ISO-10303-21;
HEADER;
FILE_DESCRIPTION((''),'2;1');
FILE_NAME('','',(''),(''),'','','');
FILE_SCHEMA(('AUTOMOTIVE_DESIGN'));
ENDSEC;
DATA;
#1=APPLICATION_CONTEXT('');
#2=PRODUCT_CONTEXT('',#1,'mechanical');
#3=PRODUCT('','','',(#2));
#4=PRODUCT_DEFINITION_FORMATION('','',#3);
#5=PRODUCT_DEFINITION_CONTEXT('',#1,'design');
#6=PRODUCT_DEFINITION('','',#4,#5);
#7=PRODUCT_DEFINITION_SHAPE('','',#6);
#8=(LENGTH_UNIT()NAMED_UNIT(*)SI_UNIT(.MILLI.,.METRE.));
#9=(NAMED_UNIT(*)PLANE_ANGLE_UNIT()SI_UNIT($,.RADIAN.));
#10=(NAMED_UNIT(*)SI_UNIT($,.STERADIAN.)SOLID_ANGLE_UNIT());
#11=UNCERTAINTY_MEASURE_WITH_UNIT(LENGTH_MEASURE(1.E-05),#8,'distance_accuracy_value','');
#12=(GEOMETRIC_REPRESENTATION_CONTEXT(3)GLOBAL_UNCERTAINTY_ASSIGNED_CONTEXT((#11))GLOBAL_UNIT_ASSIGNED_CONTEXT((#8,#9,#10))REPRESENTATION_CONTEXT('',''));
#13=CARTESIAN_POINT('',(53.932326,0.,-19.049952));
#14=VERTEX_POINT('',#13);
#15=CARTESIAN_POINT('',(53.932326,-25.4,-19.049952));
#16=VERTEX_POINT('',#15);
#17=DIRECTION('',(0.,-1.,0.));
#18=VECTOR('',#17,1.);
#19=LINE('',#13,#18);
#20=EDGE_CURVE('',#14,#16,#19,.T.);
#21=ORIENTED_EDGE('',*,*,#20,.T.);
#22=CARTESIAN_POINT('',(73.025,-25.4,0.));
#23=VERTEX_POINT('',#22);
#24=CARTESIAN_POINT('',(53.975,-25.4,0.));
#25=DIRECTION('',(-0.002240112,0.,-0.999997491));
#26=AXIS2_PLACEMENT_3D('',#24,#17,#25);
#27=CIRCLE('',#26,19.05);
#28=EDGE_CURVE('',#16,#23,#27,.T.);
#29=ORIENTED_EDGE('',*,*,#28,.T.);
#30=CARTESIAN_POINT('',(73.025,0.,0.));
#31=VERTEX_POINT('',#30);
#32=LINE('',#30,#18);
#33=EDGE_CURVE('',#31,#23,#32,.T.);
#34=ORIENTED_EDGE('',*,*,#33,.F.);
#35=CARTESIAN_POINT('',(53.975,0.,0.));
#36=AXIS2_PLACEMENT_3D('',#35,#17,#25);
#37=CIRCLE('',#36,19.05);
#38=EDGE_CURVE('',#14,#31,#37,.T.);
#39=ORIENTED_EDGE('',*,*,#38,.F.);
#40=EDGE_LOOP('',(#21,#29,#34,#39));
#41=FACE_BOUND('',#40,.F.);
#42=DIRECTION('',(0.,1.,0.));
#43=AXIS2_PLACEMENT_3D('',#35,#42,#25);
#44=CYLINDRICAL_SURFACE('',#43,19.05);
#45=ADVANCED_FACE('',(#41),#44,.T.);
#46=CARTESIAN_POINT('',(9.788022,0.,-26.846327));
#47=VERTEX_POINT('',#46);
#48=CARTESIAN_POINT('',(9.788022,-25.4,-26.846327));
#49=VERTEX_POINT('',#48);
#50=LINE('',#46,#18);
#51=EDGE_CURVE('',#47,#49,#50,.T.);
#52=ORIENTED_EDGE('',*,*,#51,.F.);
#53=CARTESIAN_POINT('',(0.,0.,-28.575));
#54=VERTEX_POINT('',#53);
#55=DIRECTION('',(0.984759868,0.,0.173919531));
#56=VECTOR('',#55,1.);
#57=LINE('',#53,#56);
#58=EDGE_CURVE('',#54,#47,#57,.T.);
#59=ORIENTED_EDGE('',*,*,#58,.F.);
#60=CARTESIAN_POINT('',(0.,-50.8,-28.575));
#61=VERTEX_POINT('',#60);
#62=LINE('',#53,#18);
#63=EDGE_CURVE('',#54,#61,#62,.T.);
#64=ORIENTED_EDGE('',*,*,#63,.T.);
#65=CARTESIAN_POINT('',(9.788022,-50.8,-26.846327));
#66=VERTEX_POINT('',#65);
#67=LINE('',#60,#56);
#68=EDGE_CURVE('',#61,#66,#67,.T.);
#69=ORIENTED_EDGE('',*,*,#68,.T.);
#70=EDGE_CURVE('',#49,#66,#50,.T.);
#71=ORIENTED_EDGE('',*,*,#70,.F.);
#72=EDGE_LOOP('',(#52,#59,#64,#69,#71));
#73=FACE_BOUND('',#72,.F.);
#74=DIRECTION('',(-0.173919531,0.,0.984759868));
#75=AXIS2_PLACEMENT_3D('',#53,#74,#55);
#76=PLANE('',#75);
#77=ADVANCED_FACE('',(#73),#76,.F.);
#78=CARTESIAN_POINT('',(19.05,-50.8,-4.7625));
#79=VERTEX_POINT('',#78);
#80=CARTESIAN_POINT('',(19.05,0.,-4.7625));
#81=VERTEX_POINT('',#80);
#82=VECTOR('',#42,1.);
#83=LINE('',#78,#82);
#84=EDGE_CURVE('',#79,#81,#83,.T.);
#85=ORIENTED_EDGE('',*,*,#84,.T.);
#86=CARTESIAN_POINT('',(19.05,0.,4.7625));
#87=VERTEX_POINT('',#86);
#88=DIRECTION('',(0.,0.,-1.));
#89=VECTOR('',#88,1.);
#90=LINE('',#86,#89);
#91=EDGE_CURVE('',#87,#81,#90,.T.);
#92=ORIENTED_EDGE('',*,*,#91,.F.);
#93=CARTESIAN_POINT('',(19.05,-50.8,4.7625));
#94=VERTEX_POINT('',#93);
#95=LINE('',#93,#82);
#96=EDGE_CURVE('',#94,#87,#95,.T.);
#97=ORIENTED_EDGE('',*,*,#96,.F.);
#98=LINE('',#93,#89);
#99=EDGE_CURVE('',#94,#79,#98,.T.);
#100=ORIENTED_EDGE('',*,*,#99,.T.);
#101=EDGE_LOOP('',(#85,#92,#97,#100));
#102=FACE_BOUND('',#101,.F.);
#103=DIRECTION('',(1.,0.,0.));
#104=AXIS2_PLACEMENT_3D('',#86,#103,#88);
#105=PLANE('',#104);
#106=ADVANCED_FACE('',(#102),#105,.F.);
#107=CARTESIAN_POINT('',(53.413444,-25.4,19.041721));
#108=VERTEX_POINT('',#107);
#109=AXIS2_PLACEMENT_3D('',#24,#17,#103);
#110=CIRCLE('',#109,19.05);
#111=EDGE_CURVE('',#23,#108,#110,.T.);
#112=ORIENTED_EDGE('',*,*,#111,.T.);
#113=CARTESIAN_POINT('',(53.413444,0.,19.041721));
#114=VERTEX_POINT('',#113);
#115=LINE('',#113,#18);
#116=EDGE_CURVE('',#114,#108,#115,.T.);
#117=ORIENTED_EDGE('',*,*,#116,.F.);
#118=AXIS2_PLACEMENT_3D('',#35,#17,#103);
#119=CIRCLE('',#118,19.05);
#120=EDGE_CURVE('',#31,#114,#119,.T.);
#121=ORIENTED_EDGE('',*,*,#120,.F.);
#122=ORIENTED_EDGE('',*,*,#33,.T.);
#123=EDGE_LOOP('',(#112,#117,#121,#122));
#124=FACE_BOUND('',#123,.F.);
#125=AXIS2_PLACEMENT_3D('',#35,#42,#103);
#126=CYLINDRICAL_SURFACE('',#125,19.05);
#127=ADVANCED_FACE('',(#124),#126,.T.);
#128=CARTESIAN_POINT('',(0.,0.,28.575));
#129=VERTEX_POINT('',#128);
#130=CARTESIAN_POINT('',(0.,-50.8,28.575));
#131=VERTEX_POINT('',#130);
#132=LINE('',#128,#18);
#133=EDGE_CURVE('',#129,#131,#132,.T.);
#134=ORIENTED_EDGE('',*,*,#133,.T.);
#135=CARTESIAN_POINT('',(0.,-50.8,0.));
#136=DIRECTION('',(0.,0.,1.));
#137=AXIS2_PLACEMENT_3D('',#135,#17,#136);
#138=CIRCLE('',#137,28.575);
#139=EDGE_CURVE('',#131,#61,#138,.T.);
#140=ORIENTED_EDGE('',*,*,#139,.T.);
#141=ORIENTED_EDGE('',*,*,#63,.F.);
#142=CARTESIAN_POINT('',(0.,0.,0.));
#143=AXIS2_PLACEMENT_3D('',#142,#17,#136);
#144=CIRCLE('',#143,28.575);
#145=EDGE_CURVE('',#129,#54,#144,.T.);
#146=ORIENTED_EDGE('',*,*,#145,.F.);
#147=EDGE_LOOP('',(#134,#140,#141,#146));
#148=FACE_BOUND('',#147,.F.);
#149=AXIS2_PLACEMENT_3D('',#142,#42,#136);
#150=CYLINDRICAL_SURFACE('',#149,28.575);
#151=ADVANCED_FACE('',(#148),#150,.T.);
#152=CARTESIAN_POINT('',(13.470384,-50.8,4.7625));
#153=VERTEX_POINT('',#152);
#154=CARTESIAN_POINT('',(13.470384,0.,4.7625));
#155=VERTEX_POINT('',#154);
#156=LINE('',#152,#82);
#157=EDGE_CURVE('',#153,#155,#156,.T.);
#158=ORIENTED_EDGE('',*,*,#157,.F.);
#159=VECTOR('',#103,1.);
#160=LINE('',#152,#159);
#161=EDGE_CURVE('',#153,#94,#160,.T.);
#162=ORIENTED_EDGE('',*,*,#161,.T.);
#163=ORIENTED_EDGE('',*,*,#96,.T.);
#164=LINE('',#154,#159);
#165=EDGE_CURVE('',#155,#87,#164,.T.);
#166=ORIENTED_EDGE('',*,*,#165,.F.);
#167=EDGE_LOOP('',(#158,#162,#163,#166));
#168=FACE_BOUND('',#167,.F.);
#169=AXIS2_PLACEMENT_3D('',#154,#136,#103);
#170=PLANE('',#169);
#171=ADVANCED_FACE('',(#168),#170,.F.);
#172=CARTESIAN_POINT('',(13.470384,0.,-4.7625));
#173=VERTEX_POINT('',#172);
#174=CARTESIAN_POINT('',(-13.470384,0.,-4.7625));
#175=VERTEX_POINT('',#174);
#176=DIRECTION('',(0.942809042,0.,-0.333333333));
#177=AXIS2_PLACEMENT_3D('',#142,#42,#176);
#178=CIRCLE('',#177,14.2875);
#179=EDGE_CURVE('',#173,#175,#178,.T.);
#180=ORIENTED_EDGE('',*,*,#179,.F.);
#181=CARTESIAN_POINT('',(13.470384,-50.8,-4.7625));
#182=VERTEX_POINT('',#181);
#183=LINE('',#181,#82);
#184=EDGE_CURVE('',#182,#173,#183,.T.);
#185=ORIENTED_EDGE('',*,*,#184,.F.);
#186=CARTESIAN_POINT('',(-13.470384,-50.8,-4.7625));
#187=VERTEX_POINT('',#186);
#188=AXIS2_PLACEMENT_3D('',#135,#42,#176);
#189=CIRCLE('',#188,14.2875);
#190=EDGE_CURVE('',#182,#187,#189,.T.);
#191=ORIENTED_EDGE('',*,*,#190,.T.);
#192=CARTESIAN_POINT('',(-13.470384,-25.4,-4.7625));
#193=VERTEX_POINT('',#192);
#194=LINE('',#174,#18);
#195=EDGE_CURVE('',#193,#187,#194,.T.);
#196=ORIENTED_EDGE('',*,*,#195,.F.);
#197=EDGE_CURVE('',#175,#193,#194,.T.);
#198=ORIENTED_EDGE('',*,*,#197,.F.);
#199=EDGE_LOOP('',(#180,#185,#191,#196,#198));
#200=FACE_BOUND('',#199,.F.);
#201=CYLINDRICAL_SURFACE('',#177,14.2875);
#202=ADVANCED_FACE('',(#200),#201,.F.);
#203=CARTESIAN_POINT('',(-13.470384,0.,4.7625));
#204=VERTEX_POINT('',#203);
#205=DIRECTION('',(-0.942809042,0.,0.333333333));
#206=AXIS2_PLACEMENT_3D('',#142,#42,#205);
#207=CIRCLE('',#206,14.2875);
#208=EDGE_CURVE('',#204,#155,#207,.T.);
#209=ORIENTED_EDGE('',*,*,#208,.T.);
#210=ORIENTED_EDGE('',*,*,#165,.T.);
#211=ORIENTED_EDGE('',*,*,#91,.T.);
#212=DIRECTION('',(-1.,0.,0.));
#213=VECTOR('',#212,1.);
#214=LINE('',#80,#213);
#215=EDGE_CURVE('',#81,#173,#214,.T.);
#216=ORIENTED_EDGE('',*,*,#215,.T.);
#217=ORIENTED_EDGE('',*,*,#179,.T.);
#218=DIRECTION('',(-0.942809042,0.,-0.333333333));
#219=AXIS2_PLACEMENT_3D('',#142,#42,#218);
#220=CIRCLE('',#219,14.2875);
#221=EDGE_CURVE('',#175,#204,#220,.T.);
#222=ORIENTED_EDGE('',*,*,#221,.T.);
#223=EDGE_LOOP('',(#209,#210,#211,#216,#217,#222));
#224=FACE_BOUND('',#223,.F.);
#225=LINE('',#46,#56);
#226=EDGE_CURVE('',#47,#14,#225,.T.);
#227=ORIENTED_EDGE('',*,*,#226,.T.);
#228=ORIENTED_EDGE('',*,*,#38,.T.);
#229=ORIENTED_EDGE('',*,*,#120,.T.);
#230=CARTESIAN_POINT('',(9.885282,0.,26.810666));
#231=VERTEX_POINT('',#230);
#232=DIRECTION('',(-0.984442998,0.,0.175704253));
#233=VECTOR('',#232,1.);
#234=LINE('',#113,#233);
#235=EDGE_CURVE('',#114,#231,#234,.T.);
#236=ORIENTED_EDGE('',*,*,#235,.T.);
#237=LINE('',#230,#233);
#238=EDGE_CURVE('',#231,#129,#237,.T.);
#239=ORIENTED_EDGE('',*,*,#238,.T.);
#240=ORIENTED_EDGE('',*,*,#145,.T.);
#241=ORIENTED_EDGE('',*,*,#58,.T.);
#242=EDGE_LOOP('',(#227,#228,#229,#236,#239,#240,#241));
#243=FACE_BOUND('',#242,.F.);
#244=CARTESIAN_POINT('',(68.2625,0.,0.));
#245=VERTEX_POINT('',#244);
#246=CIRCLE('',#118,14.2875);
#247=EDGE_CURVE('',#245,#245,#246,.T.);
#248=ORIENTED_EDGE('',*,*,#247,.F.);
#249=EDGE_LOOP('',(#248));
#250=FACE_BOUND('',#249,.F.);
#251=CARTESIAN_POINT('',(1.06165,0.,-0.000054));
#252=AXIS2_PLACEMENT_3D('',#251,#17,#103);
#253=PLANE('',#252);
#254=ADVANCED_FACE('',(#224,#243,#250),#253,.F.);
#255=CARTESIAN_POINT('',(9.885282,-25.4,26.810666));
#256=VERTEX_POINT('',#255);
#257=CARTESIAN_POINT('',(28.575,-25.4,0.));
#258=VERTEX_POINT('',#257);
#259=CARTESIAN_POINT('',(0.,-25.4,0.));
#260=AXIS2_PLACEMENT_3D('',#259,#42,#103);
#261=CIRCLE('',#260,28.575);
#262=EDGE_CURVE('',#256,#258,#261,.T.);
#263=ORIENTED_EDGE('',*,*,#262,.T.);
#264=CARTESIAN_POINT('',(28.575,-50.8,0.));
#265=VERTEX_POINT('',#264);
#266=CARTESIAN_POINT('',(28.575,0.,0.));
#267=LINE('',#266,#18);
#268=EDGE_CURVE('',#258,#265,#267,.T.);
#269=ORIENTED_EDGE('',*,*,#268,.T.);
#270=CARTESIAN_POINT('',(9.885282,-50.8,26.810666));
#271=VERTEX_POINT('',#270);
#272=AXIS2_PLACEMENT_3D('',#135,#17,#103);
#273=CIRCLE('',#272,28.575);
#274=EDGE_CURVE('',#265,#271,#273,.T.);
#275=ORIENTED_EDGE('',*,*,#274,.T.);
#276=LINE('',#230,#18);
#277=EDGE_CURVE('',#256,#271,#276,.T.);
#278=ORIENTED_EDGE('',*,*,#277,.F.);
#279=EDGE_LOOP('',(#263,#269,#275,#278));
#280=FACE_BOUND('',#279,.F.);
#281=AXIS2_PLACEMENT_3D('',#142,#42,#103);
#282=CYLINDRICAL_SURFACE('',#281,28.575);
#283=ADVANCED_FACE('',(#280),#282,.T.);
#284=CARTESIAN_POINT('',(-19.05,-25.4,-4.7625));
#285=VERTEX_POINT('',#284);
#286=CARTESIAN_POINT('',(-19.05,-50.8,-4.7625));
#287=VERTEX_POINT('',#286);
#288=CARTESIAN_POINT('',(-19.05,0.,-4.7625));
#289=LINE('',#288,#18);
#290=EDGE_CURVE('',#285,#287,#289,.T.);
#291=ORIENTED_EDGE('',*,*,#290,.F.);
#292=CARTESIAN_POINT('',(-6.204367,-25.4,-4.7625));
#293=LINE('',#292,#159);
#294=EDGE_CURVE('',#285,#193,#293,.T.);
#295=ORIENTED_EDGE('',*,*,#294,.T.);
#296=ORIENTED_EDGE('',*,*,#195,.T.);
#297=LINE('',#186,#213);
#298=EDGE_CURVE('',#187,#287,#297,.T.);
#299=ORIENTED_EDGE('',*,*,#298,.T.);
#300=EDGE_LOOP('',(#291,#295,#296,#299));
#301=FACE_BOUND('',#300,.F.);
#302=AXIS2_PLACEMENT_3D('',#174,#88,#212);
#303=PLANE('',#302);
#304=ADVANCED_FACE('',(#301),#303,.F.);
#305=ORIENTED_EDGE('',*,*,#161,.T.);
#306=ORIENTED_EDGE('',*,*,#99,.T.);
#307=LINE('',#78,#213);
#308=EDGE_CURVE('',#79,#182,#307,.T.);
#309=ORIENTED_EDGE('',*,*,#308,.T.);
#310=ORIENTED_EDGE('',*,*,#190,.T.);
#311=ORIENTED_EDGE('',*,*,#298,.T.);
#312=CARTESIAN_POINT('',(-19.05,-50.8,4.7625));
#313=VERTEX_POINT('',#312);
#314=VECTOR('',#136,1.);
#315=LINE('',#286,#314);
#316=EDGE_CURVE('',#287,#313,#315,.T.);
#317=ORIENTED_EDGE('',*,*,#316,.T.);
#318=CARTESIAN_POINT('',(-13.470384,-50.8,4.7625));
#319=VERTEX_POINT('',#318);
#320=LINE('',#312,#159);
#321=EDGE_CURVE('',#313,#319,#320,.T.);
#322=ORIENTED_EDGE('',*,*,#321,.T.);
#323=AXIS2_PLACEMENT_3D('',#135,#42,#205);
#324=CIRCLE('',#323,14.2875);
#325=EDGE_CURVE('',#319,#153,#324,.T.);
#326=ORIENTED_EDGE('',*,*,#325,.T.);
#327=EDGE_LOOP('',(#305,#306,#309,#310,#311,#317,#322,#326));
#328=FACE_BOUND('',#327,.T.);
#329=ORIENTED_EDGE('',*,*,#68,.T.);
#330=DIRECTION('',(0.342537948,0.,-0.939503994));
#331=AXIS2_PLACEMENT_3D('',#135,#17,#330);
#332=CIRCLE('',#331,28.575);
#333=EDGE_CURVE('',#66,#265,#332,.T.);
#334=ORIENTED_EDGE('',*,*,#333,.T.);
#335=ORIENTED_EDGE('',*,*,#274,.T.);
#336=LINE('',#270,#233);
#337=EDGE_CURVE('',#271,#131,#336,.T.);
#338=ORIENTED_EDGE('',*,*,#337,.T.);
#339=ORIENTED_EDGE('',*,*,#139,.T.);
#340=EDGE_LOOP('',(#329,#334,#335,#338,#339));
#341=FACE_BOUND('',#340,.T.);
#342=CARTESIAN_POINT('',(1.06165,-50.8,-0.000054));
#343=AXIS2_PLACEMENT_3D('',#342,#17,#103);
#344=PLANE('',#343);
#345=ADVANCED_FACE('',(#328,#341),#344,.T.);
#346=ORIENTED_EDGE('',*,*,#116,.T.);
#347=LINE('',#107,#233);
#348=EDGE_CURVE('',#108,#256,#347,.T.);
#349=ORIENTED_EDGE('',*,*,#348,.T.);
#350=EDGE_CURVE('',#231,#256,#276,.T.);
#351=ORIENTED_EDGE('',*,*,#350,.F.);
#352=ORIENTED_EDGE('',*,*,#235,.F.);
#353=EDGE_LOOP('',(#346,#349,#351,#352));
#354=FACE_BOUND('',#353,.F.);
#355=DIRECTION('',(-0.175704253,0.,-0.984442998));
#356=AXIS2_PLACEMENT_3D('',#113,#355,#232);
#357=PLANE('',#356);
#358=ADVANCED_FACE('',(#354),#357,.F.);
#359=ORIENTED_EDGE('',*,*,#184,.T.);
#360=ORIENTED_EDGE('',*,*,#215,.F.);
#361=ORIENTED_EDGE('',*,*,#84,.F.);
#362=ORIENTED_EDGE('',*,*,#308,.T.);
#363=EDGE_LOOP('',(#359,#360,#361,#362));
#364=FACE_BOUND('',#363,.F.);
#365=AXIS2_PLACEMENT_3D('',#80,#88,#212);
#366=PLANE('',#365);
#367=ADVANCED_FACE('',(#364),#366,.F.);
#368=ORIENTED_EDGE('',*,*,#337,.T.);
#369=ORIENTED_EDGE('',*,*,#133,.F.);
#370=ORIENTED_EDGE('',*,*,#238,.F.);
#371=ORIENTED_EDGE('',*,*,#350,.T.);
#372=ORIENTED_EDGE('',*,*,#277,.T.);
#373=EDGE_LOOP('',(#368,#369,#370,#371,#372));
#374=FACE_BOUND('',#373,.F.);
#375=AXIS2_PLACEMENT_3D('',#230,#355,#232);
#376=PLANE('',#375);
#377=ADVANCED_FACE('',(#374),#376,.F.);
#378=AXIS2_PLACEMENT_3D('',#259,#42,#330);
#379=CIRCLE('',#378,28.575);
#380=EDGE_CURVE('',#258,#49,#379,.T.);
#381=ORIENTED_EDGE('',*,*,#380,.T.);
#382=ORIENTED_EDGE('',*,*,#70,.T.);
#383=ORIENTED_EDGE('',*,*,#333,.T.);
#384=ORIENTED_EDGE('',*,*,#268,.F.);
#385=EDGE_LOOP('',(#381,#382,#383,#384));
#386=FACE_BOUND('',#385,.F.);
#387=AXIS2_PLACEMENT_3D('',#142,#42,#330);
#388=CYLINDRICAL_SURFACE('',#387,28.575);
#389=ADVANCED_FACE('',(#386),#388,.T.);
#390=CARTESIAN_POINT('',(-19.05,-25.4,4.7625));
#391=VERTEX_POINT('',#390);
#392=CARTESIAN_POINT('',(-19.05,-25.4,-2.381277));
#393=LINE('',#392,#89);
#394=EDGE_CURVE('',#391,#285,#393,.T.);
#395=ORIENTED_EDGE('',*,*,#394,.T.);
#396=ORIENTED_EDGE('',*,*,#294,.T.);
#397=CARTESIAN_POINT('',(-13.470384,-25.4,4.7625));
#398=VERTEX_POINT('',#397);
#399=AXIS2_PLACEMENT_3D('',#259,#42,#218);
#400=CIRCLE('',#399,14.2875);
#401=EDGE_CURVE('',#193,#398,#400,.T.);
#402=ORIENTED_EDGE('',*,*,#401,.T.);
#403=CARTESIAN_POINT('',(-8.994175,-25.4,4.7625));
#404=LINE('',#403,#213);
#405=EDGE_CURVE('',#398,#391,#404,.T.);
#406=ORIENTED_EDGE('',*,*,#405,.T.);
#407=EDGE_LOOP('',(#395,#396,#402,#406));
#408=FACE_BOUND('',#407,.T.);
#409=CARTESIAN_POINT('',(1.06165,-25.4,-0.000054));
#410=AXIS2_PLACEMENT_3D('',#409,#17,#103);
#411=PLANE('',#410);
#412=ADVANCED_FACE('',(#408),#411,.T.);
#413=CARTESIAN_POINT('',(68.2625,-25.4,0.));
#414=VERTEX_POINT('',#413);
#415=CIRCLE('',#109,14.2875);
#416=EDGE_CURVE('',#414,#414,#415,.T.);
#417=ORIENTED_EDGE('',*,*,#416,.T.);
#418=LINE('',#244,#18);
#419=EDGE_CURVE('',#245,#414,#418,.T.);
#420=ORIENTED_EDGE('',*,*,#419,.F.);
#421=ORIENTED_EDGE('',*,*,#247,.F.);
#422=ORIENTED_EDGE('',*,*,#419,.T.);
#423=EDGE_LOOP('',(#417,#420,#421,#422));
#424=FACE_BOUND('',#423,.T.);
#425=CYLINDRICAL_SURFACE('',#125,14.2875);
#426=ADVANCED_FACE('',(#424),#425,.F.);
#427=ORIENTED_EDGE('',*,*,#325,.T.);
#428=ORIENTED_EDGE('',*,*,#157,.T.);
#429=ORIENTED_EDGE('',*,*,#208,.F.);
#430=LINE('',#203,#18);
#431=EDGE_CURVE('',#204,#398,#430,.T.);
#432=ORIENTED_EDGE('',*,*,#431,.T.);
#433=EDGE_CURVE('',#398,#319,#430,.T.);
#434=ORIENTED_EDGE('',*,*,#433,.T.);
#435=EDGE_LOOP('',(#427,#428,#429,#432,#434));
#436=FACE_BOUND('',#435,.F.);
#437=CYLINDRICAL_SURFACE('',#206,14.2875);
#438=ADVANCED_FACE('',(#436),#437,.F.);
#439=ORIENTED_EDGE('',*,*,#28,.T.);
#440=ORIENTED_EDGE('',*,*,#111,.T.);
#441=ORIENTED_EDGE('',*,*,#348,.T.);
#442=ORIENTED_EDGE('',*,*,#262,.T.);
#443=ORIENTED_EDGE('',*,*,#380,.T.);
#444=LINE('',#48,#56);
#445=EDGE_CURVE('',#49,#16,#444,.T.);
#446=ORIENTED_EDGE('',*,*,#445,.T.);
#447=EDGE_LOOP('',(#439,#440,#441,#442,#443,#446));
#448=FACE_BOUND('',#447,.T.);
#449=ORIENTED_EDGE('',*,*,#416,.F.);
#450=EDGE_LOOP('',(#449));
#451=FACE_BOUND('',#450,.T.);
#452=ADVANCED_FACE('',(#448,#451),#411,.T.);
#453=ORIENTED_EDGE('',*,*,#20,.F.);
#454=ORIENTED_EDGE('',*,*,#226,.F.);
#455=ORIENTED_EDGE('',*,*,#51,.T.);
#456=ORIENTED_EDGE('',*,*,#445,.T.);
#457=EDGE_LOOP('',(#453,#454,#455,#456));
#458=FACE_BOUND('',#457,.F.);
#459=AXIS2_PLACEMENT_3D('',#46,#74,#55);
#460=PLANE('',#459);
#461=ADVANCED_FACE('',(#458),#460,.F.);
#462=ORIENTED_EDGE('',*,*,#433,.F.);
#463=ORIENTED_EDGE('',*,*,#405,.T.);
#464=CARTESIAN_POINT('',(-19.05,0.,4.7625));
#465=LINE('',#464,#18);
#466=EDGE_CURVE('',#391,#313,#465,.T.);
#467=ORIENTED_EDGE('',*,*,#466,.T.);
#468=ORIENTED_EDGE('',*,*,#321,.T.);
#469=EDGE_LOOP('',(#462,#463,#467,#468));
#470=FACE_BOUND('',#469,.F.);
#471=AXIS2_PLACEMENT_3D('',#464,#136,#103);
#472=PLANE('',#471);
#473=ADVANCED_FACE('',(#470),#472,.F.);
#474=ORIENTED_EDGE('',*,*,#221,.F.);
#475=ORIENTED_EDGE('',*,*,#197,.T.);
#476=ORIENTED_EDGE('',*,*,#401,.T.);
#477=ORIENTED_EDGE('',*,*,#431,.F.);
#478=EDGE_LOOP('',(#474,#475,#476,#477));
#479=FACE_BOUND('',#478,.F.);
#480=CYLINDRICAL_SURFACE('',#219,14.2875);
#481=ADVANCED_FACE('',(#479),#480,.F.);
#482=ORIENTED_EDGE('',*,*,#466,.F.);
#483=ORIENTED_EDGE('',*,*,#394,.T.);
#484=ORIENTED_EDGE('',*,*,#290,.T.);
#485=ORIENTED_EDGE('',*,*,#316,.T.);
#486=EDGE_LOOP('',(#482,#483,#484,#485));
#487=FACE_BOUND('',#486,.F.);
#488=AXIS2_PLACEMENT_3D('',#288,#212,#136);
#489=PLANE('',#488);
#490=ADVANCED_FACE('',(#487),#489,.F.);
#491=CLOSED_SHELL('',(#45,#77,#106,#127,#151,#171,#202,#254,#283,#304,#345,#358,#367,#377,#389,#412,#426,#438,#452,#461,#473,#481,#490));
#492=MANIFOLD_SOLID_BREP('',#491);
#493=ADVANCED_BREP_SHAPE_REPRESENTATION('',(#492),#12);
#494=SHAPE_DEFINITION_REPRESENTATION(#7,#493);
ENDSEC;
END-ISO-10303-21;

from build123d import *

# Parameters (mm, degrees)
F0_R     = 14.2875
F1_DEPTH = 25.4
F2_DEPTH = 50.8


with BuildPart() as f1:
    # F0 (on Front) → F1 (new body)
    with BuildSketch(Plane.XZ):
        with BuildLine():
            Line((9.8852824268, 26.8106660929), (0, 28.575))
            ThreePointArc((0, 28.575), (-28.575, 0), (0, -28.575))
            Line((0, -28.575), (9.7880218685, -26.8463266184))
            ThreePointArc((9.7880218685, -26.8463266184), (23.4117849586, -16.3834962707), (28.575, 0))
            ThreePointArc((28.575, 0), (23.4414437519, 16.3410323978), (9.8852824268, 26.8106660929))
        make_face()
        with BuildLine():
            ThreePointArc((-13.4703841816, 4.7625), (0, 14.2875), (13.4703841816, 4.7625))
            Line((13.4703841816, 4.7625), (19.05, 4.7625))
            Line((19.05, 4.7625), (19.05, -4.7625))
            Line((19.05, -4.7625), (13.4703841816, -4.7625))
            ThreePointArc((13.4703841816, -4.7625), (0, -14.2875), (-13.4703841816, -4.7625))
            Line((-13.4703841816, -4.7625), (-19.05, -4.7625))
            Line((-19.05, -4.7625), (-19.05, 4.7625))
            Line((-19.05, 4.7625), (-13.4703841816, 4.7625))
        make_face(mode=Mode.SUBTRACT)
        with BuildLine():
            Line((53.4134443953, 19.0417214375), (9.8852824268, 26.8106660929))
            ThreePointArc((9.8852824268, 26.8106660929), (23.4414437519, 16.3410323978), (28.575, 0))
            ThreePointArc((28.575, 0), (23.4117849586, -16.3834962707), (9.7880218685, -26.8463266184))
            Line((9.7880218685, -26.8463266184), (53.9323258703, -19.0499522025))
            ThreePointArc((53.9323258703, -19.0499522025), (34.9267671799, -0.2594733756), (53.4134443953, 19.0417214375))
        make_face()
        with BuildLine():
            ThreePointArc((73.025, 0), (67.2453591837, 13.6674821066), (53.4134443953, 19.0417214375))
            ThreePointArc((53.4134443953, 19.0417214375), (34.9267671799, -0.2594733756), (53.9323258703, -19.0499522025))
            ThreePointArc((53.9323258703, -19.0499522025), (67.4302881394, -13.4854633248), (73.025, 0))
        make_face()
        with Locations((53.975, 0)):
            Circle(F0_R, mode=Mode.SUBTRACT)
        with BuildLine():
            ThreePointArc((-13.4703841816, -4.7625), (-14.2875, 0), (-13.4703841816, 4.7625))
            Line((-13.4703841816, 4.7625), (-19.05, 4.7625))
            Line((-19.05, 4.7625), (-19.05, -4.7625))
            Line((-19.05, -4.7625), (-13.4703841816, -4.7625))
        make_face()
    extrude(amount=F1_DEPTH)

    # F0 (on Front) → F2 (join)
    with BuildSketch(Plane.XZ):
        with BuildLine():
            Line((9.8852824268, 26.8106660929), (0, 28.575))
            ThreePointArc((0, 28.575), (-28.575, 0), (0, -28.575))
            Line((0, -28.575), (9.7880218685, -26.8463266184))
            ThreePointArc((9.7880218685, -26.8463266184), (23.4117849586, -16.3834962707), (28.575, 0))
            ThreePointArc((28.575, 0), (23.4414437519, 16.3410323978), (9.8852824268, 26.8106660929))
        make_face()
        with BuildLine():
            ThreePointArc((-13.4703841816, 4.7625), (0, 14.2875), (13.4703841816, 4.7625))
            Line((13.4703841816, 4.7625), (19.05, 4.7625))
            Line((19.05, 4.7625), (19.05, -4.7625))
            Line((19.05, -4.7625), (13.4703841816, -4.7625))
            ThreePointArc((13.4703841816, -4.7625), (0, -14.2875), (-13.4703841816, -4.7625))
            Line((-13.4703841816, -4.7625), (-19.05, -4.7625))
            Line((-19.05, -4.7625), (-19.05, 4.7625))
            Line((-19.05, 4.7625), (-13.4703841816, 4.7625))
        make_face(mode=Mode.SUBTRACT)
    extrude(amount=F2_DEPTH)


solid = f1.part
